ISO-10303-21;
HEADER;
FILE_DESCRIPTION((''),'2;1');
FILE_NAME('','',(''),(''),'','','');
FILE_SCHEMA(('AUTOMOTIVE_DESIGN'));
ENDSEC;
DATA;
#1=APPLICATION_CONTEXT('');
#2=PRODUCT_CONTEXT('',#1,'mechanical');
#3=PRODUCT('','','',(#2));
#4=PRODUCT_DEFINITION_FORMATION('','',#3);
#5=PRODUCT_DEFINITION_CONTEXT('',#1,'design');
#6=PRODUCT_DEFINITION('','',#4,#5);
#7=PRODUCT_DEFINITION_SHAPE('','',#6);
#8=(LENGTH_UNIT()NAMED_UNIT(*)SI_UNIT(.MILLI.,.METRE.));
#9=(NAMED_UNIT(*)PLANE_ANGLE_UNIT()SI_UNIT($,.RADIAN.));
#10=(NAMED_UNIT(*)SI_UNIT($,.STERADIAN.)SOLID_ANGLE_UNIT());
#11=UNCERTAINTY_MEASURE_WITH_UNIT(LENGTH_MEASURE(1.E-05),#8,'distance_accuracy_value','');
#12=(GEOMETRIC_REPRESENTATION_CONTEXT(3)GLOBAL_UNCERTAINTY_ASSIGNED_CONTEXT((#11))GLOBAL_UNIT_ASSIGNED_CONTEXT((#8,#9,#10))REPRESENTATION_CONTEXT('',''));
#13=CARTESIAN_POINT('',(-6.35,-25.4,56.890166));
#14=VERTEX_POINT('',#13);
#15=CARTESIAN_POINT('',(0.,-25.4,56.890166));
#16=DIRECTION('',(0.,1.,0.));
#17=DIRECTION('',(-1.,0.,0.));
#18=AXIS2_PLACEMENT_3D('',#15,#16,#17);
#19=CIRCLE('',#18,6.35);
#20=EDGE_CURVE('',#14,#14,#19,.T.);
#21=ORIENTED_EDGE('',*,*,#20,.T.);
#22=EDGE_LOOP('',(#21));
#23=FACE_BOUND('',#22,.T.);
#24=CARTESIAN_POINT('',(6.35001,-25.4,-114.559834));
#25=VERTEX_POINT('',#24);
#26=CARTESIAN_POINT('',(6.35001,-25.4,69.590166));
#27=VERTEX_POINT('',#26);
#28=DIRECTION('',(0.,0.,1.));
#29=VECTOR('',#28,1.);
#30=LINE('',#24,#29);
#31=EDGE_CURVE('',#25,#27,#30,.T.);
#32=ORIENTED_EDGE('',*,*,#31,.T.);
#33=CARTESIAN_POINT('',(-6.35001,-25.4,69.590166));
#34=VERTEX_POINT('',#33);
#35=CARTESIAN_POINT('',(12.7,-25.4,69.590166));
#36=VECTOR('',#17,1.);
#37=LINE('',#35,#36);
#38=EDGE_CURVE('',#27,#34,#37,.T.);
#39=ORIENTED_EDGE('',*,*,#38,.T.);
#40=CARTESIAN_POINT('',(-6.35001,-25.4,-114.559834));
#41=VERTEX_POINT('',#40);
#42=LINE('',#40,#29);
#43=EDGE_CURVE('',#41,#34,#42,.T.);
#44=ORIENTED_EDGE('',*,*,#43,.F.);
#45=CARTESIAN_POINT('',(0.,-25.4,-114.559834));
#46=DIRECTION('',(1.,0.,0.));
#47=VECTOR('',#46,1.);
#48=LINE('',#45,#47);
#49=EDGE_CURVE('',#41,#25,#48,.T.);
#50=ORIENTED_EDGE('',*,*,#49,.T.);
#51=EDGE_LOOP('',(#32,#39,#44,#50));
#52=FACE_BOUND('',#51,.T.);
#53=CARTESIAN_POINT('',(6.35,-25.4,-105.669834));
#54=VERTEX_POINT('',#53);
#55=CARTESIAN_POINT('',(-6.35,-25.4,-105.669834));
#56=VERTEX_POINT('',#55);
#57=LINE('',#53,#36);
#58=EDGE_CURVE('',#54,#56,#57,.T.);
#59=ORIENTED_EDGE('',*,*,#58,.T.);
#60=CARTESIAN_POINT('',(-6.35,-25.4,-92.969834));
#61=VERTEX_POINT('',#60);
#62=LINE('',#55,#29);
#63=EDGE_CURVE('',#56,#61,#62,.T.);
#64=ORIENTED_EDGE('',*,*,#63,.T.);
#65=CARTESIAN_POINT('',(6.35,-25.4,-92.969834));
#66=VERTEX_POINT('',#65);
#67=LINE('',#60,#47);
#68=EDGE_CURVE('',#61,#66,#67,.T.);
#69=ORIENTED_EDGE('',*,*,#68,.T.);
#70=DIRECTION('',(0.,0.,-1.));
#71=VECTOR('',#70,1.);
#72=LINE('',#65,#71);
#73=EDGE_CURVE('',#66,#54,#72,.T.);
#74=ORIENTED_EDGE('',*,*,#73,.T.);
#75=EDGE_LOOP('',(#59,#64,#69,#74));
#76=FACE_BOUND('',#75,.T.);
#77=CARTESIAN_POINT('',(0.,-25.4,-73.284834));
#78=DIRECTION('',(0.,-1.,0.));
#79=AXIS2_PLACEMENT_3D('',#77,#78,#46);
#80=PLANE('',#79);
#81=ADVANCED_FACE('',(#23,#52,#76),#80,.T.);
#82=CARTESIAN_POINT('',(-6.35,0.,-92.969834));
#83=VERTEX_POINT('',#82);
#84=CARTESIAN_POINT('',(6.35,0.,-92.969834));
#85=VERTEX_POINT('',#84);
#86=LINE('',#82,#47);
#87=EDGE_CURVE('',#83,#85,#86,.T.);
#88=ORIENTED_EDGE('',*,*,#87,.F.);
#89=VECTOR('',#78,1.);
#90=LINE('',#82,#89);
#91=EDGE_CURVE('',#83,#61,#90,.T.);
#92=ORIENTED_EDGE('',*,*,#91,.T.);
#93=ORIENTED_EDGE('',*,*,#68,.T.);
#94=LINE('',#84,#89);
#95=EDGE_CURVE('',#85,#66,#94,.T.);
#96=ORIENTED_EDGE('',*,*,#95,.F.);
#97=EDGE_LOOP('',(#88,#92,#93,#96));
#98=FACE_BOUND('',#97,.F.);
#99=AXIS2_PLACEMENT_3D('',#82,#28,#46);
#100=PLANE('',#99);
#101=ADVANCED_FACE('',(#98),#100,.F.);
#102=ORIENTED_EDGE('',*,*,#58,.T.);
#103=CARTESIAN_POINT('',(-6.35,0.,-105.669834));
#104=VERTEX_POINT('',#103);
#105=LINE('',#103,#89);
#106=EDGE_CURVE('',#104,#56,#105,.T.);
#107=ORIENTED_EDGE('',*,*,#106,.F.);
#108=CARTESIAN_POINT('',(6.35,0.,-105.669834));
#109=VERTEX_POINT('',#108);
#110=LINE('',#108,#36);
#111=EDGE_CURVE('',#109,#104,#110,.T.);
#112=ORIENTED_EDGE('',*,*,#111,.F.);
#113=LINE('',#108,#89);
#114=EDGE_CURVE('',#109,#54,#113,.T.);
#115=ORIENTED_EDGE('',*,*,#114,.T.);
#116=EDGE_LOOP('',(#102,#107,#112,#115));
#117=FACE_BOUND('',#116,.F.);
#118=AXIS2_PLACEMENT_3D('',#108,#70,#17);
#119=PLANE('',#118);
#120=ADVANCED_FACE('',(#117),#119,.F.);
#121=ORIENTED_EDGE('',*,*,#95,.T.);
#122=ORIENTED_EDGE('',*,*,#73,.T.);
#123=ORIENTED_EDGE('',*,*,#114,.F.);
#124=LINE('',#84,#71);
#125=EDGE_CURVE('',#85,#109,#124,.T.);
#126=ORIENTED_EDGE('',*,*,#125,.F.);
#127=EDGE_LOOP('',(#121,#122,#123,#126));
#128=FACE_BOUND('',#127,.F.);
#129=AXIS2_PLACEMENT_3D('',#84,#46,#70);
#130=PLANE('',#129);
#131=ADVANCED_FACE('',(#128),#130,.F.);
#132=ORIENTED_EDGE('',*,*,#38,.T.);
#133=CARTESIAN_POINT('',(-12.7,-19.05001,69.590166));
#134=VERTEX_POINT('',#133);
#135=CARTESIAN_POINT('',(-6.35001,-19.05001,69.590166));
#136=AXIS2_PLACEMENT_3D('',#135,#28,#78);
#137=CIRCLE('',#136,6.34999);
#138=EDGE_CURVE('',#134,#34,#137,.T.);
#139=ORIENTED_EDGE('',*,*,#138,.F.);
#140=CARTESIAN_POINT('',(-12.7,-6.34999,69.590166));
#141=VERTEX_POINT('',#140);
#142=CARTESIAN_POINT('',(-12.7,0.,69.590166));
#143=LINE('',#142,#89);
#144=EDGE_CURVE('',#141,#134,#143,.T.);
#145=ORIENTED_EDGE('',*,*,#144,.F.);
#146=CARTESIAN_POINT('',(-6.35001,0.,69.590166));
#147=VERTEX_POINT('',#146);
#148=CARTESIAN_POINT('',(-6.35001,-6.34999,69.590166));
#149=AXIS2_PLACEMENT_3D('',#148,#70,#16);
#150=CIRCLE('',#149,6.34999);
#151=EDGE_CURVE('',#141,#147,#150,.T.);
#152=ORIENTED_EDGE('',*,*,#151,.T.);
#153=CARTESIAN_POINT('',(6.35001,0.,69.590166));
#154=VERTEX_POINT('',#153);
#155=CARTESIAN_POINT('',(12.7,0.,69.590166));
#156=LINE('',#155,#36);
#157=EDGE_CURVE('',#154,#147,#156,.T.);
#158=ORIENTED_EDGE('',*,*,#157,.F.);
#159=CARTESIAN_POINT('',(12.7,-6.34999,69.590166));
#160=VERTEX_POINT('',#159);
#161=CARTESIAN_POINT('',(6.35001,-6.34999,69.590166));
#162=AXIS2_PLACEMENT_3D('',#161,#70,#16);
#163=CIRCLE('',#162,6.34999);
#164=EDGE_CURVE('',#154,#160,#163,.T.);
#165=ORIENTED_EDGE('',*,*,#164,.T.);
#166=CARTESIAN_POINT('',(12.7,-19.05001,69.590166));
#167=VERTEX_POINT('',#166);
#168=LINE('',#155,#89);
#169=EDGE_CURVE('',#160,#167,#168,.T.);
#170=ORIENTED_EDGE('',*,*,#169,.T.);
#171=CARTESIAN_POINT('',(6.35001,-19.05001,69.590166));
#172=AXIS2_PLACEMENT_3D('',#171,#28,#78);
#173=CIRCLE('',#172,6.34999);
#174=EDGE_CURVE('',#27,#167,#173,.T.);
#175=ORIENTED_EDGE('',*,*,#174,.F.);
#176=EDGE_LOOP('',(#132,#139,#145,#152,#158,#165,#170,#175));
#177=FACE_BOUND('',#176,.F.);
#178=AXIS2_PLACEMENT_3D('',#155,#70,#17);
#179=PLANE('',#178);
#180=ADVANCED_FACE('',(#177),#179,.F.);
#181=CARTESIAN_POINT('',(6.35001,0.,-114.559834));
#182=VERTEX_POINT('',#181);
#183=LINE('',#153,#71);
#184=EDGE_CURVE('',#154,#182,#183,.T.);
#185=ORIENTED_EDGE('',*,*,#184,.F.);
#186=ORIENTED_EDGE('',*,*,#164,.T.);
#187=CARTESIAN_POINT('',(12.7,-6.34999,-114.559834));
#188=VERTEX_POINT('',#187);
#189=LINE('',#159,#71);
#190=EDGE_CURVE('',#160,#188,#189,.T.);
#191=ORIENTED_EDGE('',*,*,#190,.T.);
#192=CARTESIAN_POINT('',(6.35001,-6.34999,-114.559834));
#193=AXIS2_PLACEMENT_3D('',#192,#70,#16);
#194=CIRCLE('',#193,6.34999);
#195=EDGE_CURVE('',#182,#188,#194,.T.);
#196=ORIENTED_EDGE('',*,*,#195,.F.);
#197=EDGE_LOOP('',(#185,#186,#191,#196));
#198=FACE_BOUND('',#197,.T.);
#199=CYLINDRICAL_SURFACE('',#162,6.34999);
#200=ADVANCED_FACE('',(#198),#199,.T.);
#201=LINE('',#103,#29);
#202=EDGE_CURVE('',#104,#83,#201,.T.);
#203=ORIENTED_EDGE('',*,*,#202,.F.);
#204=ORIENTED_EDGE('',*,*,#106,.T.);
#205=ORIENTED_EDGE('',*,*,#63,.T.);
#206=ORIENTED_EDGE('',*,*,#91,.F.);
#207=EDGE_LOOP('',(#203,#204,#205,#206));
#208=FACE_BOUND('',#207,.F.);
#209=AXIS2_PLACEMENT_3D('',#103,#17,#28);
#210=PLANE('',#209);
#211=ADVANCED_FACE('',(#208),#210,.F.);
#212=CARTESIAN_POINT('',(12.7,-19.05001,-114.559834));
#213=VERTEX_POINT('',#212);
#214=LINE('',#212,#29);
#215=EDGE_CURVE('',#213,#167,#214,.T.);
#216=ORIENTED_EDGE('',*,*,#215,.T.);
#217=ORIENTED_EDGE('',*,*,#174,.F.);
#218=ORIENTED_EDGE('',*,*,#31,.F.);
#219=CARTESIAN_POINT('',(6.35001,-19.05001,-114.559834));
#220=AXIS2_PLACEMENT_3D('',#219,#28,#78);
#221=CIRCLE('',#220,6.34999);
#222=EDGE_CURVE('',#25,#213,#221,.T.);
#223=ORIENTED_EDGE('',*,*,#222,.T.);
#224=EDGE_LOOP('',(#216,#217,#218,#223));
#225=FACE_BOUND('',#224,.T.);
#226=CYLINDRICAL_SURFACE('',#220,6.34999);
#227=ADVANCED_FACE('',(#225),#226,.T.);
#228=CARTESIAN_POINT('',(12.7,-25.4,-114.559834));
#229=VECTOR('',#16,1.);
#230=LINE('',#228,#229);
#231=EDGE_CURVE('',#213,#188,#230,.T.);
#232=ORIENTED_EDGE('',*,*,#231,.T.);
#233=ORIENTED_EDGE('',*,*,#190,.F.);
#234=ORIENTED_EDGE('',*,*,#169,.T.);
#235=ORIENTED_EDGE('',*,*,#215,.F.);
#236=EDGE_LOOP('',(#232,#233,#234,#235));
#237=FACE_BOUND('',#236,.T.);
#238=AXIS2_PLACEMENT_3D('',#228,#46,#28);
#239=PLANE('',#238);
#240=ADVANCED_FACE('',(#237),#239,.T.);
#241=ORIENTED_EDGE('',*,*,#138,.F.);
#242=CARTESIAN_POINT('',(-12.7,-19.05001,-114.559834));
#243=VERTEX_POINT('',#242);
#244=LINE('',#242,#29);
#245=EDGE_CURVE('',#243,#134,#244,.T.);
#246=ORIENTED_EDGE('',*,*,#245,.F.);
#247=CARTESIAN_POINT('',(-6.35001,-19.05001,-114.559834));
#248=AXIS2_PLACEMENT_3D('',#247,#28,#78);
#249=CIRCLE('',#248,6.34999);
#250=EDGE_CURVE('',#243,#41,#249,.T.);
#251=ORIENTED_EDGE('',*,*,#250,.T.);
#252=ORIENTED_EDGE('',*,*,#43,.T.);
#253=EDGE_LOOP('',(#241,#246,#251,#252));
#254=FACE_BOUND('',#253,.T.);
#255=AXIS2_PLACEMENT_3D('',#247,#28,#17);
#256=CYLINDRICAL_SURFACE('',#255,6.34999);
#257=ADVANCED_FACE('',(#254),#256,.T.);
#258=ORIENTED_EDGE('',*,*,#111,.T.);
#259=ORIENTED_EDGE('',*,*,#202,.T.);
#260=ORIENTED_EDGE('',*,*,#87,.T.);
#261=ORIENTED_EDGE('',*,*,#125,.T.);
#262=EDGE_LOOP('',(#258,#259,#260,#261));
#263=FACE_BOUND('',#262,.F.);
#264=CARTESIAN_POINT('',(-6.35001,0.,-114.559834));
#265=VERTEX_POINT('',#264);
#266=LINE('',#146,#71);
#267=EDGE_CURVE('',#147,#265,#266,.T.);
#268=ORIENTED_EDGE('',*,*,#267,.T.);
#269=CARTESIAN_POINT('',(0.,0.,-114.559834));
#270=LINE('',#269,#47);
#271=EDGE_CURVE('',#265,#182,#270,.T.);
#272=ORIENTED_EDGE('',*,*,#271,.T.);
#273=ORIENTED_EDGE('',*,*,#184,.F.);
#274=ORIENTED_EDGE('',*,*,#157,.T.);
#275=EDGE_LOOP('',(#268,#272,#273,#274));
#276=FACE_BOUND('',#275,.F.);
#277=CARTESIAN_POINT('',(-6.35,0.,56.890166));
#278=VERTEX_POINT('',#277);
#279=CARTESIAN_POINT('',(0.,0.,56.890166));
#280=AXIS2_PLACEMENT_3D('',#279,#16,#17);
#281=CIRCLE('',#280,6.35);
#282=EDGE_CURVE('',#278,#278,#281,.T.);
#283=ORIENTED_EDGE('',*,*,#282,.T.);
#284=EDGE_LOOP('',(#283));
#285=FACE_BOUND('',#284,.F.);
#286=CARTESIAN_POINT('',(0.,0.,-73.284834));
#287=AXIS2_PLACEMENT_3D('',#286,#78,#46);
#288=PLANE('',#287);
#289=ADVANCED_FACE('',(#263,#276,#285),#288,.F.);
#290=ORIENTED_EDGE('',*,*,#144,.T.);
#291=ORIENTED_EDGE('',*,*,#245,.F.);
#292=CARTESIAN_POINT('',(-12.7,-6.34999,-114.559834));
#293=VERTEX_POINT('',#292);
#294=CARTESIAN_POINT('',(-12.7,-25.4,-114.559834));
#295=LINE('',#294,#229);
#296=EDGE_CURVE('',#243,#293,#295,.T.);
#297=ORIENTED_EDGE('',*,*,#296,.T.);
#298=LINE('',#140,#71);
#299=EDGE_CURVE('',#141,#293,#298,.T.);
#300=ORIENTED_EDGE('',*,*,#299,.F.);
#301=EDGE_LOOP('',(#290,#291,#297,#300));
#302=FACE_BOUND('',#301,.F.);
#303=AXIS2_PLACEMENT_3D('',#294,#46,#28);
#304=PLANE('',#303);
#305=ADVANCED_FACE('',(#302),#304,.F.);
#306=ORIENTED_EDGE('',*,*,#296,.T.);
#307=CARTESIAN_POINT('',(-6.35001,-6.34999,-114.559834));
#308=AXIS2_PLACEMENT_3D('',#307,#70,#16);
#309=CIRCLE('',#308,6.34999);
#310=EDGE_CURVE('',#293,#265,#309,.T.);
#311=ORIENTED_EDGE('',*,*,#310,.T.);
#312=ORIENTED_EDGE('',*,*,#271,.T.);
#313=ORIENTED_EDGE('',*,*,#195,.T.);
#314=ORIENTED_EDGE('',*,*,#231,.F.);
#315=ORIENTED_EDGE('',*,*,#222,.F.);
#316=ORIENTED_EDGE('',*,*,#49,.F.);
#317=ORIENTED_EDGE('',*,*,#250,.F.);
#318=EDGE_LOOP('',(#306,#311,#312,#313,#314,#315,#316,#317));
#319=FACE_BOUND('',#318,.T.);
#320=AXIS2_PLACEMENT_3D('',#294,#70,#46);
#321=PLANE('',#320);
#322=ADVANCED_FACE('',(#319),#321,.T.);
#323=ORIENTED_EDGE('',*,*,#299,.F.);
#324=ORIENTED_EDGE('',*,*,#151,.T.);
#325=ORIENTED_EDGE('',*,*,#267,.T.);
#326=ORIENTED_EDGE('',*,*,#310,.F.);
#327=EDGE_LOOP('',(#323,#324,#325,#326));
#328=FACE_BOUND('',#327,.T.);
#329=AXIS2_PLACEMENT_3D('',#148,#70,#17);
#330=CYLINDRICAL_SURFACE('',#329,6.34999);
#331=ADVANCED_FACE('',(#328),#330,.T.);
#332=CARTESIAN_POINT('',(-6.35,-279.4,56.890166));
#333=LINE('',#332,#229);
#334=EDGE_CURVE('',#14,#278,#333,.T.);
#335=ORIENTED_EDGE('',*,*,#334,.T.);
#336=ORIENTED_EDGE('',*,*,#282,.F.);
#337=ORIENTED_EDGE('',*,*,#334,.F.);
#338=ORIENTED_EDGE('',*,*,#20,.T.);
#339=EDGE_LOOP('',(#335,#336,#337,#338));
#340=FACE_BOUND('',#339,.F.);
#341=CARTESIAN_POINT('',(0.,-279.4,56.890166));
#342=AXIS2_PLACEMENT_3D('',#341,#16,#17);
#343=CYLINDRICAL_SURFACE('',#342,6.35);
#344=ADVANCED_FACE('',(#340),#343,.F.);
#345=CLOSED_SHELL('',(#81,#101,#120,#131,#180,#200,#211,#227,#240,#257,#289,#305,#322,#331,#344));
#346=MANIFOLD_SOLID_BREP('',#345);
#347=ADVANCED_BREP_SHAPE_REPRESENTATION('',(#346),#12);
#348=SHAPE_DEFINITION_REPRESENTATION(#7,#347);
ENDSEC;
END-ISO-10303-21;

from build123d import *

# Parameters (mm, degrees)
F1_DEPTH = 25.4
F3_D     = 12.7
F3_DEPTH = 254
F3_TIP   = 3.8154649308
F4_W     = 25.4
F4_H     = 82.55
F5_DEPTH = 25.4
F7_DEPTH = 25.4
F8_R     = 6.34999


# Not quite as in the source:
# - a fillet or chamfer is up to 0.001 mm smaller than in the source, because OpenCascade refuses the exact size


with BuildPart() as f1:
    # F0 (on Front) → F1 (new body)
    with BuildSketch(Plane.XZ):
        Polygon((-12.7, -32.0098340811), (0, -32.0098340811), (12.7, -32.0098340811), (12.7, 69.5901659189), (-12.7, 69.5901659189), align=None)
    extrude(amount=F1_DEPTH)

    # F3
    with Locations(Plane.XZ.offset(25.4)):
        with Locations((0, 56.8901659189)):
            Hole(F3_D / 2, depth=F3_DEPTH)
            with Locations((0, 0, -(F3_DEPTH + F3_TIP / 2))):  # 118° drill point
                Cone(0, F3_D / 2, F3_TIP, mode=Mode.SUBTRACT)

    # F4 (on face) → F5 (join)
    with BuildSketch(Plane.XZ.offset(25.4)):
        with Locations((0, -73.2848340811)):
            Rectangle(F4_W, F4_H)
    extrude(amount=-F5_DEPTH)

    # F6 (on face) → F7 (cut)
    with BuildSketch(Plane(origin=(0, 0, 0), x_dir=(-1, 0, 0), z_dir=(0, 1, 0))):
        Polygon((0, -105.6698340811), (6.35, -105.6698340811), (6.35, -92.9698340811), (-6.35, -92.9698340811), (-6.35, -105.6698340811), align=None)
    extrude(amount=-F7_DEPTH, mode=Mode.SUBTRACT)

    # F8 (radius 6.35 in the source; OpenCascade refuses exactly that, so slightly less here)
    f8_edges = [f1.edges().sort_by_distance(p)[0] for p in [
        (12.7, 0, -22.484834),
        (-12.7, 0, -22.484834),
        (-12.7, -25.4, -22.484834),
        (12.7, -25.4, -22.484834),
    ]]
    fillet(f8_edges, radius=F8_R)


solid = f1.part
